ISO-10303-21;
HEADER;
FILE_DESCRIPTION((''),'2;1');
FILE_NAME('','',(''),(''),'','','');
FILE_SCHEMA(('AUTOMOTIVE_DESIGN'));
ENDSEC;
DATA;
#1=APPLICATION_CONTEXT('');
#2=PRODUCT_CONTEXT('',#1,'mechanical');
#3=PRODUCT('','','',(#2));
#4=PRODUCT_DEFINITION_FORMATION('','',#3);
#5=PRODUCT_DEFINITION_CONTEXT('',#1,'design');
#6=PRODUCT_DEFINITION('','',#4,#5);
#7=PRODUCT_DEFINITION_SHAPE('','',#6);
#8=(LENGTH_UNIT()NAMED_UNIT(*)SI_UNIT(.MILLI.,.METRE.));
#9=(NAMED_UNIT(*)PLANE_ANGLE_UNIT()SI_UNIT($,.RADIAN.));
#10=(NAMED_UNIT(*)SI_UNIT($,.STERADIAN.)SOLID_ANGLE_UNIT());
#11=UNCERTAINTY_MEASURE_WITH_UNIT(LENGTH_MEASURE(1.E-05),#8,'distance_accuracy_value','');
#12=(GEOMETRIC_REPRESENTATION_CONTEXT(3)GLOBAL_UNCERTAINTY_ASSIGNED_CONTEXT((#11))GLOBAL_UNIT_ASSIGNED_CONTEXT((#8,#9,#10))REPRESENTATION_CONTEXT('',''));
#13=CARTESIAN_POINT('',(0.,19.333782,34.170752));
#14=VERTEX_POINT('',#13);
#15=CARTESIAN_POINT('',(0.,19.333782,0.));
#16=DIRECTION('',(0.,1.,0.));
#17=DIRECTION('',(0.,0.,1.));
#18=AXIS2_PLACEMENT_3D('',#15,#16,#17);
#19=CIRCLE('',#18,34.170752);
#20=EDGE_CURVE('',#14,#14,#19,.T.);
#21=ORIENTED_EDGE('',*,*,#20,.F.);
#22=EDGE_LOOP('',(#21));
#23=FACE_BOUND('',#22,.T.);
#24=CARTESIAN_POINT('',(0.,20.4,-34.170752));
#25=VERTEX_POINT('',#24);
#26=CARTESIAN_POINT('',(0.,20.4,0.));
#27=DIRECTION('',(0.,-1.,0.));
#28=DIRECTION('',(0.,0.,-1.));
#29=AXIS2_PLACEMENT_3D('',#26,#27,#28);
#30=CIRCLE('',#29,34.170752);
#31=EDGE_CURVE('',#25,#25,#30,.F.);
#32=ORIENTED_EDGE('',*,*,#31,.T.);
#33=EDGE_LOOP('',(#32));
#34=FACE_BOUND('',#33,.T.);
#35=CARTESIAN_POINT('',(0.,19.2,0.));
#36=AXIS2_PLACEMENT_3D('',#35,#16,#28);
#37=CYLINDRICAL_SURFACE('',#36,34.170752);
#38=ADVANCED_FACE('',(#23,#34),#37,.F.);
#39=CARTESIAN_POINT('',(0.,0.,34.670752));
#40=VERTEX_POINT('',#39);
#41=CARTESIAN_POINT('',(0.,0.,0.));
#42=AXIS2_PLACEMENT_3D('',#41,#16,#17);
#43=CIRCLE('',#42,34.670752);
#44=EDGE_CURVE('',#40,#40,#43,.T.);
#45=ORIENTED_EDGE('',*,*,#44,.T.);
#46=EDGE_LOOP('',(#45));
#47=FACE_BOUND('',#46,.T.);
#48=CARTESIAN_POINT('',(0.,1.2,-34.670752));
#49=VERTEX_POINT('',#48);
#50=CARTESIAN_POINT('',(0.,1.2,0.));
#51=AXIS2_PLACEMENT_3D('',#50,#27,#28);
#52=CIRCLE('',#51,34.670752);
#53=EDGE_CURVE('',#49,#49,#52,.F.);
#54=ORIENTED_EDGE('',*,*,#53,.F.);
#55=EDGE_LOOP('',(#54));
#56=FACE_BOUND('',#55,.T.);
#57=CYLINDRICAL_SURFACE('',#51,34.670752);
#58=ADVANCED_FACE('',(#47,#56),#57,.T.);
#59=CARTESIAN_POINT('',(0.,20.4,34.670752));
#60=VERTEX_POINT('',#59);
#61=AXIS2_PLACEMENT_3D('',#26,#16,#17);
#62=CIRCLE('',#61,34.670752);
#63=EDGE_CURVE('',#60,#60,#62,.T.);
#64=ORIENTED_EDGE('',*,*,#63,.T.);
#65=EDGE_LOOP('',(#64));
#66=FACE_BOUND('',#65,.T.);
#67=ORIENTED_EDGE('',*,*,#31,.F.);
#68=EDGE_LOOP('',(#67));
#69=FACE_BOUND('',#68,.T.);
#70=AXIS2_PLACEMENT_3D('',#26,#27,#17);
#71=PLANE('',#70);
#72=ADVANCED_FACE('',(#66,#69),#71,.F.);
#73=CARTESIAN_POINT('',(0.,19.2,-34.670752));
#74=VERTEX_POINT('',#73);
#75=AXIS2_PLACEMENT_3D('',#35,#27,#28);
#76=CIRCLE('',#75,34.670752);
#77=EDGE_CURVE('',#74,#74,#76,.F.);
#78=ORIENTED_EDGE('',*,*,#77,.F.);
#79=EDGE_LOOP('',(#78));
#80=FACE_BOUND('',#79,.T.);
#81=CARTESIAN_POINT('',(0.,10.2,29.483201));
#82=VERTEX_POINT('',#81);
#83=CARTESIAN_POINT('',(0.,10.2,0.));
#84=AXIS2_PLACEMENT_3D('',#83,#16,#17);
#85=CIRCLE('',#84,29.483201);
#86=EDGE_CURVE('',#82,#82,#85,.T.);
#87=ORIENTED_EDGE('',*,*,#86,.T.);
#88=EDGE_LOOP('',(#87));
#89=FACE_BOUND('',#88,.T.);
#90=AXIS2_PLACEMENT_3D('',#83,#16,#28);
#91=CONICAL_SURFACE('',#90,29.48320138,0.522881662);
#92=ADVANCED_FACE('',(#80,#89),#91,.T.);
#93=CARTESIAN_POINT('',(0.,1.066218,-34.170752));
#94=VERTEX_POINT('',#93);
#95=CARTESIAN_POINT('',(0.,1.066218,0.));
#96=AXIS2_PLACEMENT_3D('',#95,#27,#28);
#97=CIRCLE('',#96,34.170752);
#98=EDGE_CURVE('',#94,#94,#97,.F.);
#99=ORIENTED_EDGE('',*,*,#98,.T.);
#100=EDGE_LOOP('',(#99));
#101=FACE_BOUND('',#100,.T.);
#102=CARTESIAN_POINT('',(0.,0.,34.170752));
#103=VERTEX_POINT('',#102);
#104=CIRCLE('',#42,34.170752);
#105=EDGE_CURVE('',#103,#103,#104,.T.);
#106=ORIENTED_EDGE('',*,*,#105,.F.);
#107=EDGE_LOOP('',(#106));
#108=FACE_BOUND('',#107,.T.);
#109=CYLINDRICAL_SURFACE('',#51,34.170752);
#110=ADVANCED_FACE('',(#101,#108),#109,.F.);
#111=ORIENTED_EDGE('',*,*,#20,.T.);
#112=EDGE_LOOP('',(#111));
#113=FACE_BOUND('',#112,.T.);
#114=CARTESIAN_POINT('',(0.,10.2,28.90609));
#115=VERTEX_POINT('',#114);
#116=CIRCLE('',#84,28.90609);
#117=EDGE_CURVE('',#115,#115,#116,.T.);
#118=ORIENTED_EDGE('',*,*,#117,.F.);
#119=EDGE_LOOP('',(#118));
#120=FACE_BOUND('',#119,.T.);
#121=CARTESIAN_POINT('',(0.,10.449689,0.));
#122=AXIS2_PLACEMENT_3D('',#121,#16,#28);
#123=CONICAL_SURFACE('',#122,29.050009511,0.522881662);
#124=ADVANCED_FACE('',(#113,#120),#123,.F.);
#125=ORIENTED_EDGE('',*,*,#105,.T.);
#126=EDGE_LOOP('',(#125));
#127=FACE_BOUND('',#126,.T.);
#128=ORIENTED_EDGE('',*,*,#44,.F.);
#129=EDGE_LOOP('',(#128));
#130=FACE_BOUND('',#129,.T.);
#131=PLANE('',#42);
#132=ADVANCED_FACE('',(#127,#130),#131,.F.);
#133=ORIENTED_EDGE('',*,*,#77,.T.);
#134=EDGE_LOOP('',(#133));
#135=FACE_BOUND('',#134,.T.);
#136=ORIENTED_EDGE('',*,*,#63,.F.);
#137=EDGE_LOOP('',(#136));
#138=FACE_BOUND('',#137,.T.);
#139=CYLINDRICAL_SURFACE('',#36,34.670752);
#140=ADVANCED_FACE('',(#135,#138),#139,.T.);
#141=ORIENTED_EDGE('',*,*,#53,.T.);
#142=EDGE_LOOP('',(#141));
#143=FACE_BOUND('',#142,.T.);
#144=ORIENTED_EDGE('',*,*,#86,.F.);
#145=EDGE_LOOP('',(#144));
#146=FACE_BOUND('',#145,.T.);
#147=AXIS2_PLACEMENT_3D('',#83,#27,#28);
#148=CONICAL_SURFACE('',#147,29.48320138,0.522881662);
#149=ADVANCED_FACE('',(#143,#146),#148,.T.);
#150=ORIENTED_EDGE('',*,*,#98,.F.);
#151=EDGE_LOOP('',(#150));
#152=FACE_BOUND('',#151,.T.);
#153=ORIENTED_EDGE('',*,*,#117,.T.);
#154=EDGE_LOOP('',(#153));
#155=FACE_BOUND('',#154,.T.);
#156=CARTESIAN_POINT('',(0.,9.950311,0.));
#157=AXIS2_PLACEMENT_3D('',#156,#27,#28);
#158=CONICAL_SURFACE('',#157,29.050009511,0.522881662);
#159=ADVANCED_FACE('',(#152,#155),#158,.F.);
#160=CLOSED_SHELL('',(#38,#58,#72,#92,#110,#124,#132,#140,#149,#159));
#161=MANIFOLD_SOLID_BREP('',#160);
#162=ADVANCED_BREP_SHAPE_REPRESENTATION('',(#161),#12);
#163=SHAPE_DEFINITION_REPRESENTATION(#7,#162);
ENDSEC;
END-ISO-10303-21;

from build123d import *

# Parameters (mm, degrees)
SKETCH_1_R      = 34.670752002
EXTRUDE_1_DEPTH = 1.2
SKETCH_3_R      = 34.670752002
SKETCH_2_R      = 29.48320138


# Read off the part's stored shape, not the designer's step: 쉘1
with BuildPart() as part:
    # 스케치1 → 보스-돌출1 (new body)
    with BuildSketch(Plane(origin=(0, 0, 0), x_dir=(1, 0, 0), z_dir=(0, 1, 0))):
        with Locations(Location((0, 0, 0), (0, 0, 270))):
            Circle(SKETCH_1_R)
    extrude_1 = extrude(amount=EXTRUDE_1_DEPTH)

    # 스케치3 → 로프트1 section 0
    with BuildSketch(Plane(origin=(0, 1.2, 0), x_dir=(1, 0, 0), z_dir=(0, 1, 0))):
        Circle(SKETCH_3_R)
    # 스케치2 → 로프트1 section 1
    with BuildSketch(Plane(origin=(0, 10.2, 0), x_dir=(1, 0, 0), z_dir=(0, 1, 0))):
        Circle(SKETCH_2_R)
    loft_1 = loft()

    # 대칭 복사1: 보스-돌출1, 로프트1 across plane
    add(extrude_1.mirror(Plane.ZX.offset(10.2)))
    add(loft_1.mirror(Plane.ZX.offset(10.2)))

    # 쉘1 outline → 쉘1 (revolve, cut)
    with BuildSketch(Plane.XY):
        Polygon((34.170752002, 0), (34.170752002, 1.066217535), (28.906089901, 10.2), (34.170752002, 19.333782465), (34.170752002, 20.4), (0, 20.4), (0, 0), align=None)
    revolve(axis=Axis((0, 0, 0), (0, 1, 0)), mode=Mode.SUBTRACT)


solid = part.part
